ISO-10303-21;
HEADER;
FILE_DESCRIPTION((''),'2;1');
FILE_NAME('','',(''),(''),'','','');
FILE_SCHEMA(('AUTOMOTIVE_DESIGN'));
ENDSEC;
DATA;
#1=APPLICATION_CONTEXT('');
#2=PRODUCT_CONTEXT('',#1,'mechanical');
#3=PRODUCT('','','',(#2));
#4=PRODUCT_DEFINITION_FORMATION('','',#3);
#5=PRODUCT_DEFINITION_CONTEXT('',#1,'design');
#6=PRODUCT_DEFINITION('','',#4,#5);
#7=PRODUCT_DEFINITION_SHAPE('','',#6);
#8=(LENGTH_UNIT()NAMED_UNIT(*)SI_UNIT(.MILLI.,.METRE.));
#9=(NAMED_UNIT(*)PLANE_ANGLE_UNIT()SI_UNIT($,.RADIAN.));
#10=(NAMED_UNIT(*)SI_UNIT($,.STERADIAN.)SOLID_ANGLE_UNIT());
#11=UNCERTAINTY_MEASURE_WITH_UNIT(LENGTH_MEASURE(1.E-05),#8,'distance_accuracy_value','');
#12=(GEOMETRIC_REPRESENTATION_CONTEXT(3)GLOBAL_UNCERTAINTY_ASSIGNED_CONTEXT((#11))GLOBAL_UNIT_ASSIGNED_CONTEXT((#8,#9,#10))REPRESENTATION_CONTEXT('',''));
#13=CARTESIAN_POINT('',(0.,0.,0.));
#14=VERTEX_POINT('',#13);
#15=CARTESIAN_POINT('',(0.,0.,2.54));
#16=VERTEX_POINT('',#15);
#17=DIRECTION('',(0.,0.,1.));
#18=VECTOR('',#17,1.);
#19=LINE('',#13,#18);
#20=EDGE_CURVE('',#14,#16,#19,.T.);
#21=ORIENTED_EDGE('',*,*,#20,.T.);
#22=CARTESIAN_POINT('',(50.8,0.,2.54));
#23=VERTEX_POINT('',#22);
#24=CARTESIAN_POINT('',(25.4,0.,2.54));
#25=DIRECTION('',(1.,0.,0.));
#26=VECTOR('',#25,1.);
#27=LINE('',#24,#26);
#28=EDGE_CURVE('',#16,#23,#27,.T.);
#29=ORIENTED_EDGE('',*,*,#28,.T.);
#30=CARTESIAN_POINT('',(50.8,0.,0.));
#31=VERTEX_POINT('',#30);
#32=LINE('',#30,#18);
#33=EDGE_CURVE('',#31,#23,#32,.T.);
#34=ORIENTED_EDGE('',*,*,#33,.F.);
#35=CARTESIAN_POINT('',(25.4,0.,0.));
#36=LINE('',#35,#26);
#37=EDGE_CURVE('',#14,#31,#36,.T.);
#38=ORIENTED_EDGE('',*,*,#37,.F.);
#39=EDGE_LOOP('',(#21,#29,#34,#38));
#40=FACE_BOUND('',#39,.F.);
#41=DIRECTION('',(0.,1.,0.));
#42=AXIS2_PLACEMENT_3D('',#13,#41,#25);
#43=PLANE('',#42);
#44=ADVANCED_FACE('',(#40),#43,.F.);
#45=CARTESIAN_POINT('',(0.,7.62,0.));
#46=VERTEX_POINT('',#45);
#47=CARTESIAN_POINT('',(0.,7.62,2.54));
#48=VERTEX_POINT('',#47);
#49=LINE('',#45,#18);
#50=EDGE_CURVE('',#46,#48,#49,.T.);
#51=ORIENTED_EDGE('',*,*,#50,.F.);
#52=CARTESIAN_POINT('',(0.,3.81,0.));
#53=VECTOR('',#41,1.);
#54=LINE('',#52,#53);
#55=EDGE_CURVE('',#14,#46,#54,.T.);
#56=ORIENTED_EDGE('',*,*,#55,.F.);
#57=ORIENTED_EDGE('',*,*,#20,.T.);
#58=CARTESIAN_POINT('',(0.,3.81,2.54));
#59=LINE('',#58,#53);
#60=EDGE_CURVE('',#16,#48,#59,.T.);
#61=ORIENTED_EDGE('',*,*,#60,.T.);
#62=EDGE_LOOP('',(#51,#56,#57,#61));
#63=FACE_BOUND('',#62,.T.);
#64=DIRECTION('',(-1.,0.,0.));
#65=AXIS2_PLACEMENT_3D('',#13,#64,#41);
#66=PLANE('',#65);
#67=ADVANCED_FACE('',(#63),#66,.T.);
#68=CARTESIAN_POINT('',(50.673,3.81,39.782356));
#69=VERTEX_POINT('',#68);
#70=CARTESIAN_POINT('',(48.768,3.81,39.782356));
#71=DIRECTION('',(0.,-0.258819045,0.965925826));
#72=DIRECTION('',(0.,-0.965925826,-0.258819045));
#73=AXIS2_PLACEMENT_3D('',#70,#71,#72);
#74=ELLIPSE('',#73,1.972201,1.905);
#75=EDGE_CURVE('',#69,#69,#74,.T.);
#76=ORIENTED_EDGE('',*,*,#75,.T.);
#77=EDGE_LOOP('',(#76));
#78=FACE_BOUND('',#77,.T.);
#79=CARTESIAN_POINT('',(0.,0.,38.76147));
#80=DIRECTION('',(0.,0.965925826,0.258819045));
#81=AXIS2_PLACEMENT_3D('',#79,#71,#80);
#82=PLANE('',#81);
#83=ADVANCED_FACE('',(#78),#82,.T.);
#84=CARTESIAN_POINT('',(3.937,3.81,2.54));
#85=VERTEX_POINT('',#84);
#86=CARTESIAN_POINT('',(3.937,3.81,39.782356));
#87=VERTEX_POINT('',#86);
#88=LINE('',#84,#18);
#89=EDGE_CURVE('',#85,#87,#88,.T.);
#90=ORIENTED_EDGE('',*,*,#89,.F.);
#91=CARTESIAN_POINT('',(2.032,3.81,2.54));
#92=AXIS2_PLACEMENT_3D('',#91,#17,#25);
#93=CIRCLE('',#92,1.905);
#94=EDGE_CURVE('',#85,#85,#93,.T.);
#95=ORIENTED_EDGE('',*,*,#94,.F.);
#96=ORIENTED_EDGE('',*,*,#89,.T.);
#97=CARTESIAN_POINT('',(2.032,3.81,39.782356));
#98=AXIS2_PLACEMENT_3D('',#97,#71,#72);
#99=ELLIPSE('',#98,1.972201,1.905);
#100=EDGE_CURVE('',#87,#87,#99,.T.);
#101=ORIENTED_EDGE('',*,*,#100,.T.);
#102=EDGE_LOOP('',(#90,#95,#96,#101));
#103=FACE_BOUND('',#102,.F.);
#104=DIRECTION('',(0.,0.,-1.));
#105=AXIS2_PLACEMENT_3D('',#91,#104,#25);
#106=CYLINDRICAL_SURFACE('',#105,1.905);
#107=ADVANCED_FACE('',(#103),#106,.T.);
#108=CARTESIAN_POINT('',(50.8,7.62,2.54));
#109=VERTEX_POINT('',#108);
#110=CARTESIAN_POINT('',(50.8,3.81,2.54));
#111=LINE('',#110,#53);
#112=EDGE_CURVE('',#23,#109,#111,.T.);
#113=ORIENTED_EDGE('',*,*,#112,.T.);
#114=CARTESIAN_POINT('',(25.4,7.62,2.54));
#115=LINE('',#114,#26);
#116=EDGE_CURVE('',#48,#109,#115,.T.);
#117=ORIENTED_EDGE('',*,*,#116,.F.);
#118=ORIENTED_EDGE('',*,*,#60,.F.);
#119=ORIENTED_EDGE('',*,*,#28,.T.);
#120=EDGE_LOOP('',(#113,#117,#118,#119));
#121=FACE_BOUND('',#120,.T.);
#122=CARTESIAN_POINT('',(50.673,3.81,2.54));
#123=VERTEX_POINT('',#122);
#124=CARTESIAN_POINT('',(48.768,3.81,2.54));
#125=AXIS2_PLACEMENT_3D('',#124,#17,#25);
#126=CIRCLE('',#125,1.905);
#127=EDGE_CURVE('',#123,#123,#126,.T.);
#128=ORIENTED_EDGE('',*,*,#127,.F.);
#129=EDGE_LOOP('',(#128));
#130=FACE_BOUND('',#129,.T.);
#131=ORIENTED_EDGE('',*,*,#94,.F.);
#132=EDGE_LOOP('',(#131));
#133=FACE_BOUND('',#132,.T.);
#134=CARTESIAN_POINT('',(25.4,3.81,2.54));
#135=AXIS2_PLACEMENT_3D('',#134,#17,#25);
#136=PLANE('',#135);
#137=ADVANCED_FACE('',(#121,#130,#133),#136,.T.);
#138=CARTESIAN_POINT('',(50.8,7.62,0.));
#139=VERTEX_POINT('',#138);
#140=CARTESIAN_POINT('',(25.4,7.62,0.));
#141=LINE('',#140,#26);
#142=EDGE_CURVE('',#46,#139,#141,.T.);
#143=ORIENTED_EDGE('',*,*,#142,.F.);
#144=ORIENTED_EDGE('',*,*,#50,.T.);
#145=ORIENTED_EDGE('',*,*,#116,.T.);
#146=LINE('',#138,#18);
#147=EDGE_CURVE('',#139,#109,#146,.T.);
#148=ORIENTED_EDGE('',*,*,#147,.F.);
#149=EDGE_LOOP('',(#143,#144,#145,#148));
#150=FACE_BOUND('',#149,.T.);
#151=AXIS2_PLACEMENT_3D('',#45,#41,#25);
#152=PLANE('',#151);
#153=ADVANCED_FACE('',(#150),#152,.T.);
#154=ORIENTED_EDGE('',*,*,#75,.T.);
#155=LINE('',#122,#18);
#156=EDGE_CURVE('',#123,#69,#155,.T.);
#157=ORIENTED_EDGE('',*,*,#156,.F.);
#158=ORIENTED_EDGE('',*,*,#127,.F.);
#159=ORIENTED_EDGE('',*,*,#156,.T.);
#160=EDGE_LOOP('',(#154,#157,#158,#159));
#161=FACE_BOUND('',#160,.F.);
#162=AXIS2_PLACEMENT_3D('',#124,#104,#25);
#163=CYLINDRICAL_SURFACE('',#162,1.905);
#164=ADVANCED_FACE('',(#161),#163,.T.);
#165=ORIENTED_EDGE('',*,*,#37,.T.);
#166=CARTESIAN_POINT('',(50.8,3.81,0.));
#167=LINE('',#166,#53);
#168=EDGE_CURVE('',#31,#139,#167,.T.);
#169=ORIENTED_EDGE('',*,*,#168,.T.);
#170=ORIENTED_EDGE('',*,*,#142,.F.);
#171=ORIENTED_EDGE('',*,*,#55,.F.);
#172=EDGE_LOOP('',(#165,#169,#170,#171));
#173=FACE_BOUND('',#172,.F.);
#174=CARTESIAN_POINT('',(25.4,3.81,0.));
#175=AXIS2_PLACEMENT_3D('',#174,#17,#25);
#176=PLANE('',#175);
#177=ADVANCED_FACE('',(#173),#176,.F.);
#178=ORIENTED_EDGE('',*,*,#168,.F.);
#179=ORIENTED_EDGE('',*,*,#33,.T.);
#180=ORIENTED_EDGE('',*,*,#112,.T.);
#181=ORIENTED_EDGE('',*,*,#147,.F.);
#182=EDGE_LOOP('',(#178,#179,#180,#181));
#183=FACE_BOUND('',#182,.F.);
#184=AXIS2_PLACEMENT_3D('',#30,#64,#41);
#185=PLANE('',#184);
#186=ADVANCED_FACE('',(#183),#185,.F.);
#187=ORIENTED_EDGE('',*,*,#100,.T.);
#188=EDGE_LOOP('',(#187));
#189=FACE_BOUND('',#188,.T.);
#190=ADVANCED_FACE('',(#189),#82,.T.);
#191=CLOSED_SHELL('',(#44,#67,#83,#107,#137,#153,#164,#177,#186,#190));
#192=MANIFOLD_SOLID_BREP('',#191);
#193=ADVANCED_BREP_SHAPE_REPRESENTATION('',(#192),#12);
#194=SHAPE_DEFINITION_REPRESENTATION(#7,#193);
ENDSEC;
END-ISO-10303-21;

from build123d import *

# Parameters (mm, degrees)
F0_W          = 50.8
F0_H          = 7.62
F1_DEPTH      = 2.54
F2_R          = 1.905
F3_DEPTH      = 38.1
F5_DEPTH      = 50.801
F5_DEPTH_BACK = 94


# Not quite as in the source:
# - an extrude ends at something that could not be found from the text; its depth is read off the source's solid


with BuildPart() as f1:
    # F0 (on Top) → F1 (new body)
    with BuildSketch(Plane.XY):
        with Locations((25.4, 3.81)):
            Rectangle(F0_W, F0_H)
    extrude(amount=F1_DEPTH)

    # F2 (on face) → F3 (join)
    with BuildSketch(Plane.XY.offset(2.54)):
        with Locations((2.032, 3.81)):
            Circle(F2_R)
        with Locations((48.768, 3.81)):
            Circle(F2_R)
    extrude(amount=F3_DEPTH)

    # F4 (on Right) → F5 (cut, two sides)
    with BuildSketch(Plane.YZ) as f5_sk:
        Polygon((0, 40.64), (0, 38.7614695235), (7.5709112298, 40.7900890735), align=None)
    extrude(amount=F5_DEPTH, mode=Mode.SUBTRACT)
    extrude(f5_sk.sketch, amount=-F5_DEPTH_BACK, mode=Mode.SUBTRACT)


solid = f1.part
